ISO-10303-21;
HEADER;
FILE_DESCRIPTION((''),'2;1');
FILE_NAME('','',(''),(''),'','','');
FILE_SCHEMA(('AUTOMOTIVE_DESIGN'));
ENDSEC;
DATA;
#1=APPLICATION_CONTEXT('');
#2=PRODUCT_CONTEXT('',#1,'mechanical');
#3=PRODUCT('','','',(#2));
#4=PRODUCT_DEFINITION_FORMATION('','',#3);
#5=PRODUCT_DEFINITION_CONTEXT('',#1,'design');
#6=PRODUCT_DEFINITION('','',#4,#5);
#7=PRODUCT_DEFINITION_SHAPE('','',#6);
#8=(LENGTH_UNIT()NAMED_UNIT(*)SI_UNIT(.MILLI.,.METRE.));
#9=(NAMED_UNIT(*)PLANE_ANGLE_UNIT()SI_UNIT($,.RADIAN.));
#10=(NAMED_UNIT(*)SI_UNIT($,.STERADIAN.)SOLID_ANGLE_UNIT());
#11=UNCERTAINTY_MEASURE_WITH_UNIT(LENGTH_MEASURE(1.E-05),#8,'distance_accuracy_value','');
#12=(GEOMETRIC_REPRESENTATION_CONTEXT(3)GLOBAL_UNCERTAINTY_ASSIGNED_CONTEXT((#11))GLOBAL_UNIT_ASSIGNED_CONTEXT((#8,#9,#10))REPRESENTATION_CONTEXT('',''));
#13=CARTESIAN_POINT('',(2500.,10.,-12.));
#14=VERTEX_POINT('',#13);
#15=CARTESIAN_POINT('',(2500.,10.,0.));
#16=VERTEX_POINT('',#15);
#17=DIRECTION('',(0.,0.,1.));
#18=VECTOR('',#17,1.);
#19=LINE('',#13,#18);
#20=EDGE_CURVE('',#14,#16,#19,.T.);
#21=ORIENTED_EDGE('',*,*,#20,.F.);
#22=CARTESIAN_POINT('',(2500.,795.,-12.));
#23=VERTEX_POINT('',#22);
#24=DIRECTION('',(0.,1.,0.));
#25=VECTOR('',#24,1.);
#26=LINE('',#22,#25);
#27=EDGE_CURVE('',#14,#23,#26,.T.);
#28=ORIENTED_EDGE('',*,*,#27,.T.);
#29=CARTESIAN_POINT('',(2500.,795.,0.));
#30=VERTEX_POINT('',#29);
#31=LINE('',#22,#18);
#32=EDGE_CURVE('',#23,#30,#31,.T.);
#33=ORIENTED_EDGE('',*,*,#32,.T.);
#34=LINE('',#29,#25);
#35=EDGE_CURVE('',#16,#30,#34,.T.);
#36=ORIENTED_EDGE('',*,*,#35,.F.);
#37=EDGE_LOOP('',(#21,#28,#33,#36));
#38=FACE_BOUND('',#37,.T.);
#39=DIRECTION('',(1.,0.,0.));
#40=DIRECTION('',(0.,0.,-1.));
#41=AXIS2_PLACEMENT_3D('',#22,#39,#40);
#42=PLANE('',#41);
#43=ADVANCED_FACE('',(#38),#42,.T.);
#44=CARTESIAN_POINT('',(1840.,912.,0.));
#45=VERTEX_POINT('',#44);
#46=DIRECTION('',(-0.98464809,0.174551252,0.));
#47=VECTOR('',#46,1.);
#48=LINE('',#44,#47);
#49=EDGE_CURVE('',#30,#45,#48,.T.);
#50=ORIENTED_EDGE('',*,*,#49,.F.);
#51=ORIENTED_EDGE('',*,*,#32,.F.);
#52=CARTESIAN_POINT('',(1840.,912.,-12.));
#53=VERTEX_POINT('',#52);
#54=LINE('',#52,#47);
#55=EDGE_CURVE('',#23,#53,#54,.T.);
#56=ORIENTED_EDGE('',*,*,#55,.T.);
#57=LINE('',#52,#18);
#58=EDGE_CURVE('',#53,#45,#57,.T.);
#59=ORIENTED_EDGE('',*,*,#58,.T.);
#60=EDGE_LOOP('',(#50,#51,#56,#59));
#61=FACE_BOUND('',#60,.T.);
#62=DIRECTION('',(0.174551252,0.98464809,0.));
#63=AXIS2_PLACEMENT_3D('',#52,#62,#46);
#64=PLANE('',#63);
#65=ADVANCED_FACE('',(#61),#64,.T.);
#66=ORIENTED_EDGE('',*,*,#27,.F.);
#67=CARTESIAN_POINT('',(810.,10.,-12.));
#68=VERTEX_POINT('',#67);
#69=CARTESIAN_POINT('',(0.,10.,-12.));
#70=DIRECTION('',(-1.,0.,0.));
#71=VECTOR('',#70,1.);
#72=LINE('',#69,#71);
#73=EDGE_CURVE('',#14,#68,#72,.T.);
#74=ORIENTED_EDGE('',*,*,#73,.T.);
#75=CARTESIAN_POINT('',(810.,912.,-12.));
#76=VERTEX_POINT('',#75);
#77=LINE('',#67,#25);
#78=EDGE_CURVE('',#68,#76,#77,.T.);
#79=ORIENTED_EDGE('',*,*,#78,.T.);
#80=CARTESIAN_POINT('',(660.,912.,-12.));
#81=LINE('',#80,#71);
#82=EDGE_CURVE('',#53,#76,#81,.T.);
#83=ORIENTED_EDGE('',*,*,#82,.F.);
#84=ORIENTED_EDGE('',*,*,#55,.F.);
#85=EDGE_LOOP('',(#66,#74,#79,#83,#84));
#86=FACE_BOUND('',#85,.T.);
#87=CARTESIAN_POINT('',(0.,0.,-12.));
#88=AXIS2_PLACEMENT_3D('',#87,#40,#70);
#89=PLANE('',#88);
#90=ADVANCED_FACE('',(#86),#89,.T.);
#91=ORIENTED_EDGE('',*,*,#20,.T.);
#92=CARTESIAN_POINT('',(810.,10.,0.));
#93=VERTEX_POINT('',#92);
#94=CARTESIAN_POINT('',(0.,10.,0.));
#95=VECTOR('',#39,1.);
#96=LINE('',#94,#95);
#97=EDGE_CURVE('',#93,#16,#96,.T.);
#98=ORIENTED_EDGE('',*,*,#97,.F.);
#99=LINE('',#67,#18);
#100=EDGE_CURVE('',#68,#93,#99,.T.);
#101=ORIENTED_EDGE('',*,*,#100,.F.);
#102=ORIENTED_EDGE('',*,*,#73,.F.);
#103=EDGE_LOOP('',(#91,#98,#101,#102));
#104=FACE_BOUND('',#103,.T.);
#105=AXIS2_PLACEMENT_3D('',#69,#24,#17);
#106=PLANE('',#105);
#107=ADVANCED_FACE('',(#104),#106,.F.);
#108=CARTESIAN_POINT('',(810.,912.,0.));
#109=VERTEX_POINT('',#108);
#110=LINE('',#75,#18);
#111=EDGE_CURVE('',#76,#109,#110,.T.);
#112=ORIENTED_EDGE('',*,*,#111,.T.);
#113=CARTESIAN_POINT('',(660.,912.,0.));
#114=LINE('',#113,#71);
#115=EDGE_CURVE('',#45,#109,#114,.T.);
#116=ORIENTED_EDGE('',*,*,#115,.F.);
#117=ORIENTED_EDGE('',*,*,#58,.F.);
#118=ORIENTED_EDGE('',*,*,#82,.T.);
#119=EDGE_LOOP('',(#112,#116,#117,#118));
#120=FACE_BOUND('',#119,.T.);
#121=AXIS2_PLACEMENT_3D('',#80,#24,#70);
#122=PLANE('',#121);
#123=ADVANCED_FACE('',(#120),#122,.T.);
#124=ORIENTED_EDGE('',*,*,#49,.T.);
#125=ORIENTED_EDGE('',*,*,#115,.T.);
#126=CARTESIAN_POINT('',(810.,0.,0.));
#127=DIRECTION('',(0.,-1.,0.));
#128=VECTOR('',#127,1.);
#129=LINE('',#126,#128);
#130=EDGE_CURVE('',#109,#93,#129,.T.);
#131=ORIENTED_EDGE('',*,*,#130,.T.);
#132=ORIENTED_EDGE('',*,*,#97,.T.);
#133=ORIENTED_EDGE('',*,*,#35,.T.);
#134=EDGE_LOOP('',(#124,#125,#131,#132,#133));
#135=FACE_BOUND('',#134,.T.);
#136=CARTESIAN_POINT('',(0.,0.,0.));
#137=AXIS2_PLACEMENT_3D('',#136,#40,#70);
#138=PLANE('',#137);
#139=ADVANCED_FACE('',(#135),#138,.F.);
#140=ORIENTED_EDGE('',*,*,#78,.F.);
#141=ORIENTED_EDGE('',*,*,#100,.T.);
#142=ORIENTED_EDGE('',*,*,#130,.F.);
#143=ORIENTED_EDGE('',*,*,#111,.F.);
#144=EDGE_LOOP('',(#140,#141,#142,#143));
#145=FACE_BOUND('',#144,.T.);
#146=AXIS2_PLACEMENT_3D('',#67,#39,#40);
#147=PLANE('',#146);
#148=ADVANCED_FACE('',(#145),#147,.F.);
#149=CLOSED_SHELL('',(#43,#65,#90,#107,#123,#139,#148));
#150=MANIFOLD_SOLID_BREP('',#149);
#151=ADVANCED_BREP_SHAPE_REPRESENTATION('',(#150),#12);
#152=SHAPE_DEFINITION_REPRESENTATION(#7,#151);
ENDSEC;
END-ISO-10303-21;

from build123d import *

# Parameters (mm, degrees)
TABAN_FLAN_1_DEPTH         = 12
KES_EKSTR_ZYON1_DEPTH      = 2662.181692407
KES_EKSTR_ZYON1_DEPTH_BACK = 2662.181692407
IZIM2_W                    = 2500
IZIM2_H                    = 10
KES_EKSTR_ZYON2_DEPTH      = 2662.181692407
KES_EKSTR_ZYON2_DEPTH_BACK = 2662.181692407


# Sheet-metal steps are written as plain solids
with BuildPart() as part:
    # Çizim1 → Taban-Flanş1 (new body)
    with BuildSketch(Plane.XY):
        Polygon((0, 0), (0, 795), (660, 912), (1840, 912), (2500, 795), (2500, 0), align=None)
    extrude(amount=-TABAN_FLAN_1_DEPTH)

    # Çizim2 → Kes-Ekstrüzyon1 (cut, two sides: drawn at the far end of the back side and taken through both)
    with BuildSketch(Plane.XY.offset(-KES_EKSTR_ZYON1_DEPTH_BACK)):
        with Locations((1250, 5)):
            Rectangle(IZIM2_W, IZIM2_H)
    extrude(amount=KES_EKSTR_ZYON1_DEPTH + KES_EKSTR_ZYON1_DEPTH_BACK, mode=Mode.SUBTRACT)

    # Çizim3 → Kes-Ekstrüzyon2 (cut, two sides: drawn at the far end of the back side and taken through both)
    with BuildSketch(Plane.XY.offset(-KES_EKSTR_ZYON2_DEPTH_BACK)):
        Polygon((810, 10), (810, 912), (-172.469977519, 1159.159604292), (-279.270596873, -118.492249454), (448.555846128, -150.136877411), align=None)
    extrude(amount=KES_EKSTR_ZYON2_DEPTH + KES_EKSTR_ZYON2_DEPTH_BACK, mode=Mode.SUBTRACT)


solid = part.part
